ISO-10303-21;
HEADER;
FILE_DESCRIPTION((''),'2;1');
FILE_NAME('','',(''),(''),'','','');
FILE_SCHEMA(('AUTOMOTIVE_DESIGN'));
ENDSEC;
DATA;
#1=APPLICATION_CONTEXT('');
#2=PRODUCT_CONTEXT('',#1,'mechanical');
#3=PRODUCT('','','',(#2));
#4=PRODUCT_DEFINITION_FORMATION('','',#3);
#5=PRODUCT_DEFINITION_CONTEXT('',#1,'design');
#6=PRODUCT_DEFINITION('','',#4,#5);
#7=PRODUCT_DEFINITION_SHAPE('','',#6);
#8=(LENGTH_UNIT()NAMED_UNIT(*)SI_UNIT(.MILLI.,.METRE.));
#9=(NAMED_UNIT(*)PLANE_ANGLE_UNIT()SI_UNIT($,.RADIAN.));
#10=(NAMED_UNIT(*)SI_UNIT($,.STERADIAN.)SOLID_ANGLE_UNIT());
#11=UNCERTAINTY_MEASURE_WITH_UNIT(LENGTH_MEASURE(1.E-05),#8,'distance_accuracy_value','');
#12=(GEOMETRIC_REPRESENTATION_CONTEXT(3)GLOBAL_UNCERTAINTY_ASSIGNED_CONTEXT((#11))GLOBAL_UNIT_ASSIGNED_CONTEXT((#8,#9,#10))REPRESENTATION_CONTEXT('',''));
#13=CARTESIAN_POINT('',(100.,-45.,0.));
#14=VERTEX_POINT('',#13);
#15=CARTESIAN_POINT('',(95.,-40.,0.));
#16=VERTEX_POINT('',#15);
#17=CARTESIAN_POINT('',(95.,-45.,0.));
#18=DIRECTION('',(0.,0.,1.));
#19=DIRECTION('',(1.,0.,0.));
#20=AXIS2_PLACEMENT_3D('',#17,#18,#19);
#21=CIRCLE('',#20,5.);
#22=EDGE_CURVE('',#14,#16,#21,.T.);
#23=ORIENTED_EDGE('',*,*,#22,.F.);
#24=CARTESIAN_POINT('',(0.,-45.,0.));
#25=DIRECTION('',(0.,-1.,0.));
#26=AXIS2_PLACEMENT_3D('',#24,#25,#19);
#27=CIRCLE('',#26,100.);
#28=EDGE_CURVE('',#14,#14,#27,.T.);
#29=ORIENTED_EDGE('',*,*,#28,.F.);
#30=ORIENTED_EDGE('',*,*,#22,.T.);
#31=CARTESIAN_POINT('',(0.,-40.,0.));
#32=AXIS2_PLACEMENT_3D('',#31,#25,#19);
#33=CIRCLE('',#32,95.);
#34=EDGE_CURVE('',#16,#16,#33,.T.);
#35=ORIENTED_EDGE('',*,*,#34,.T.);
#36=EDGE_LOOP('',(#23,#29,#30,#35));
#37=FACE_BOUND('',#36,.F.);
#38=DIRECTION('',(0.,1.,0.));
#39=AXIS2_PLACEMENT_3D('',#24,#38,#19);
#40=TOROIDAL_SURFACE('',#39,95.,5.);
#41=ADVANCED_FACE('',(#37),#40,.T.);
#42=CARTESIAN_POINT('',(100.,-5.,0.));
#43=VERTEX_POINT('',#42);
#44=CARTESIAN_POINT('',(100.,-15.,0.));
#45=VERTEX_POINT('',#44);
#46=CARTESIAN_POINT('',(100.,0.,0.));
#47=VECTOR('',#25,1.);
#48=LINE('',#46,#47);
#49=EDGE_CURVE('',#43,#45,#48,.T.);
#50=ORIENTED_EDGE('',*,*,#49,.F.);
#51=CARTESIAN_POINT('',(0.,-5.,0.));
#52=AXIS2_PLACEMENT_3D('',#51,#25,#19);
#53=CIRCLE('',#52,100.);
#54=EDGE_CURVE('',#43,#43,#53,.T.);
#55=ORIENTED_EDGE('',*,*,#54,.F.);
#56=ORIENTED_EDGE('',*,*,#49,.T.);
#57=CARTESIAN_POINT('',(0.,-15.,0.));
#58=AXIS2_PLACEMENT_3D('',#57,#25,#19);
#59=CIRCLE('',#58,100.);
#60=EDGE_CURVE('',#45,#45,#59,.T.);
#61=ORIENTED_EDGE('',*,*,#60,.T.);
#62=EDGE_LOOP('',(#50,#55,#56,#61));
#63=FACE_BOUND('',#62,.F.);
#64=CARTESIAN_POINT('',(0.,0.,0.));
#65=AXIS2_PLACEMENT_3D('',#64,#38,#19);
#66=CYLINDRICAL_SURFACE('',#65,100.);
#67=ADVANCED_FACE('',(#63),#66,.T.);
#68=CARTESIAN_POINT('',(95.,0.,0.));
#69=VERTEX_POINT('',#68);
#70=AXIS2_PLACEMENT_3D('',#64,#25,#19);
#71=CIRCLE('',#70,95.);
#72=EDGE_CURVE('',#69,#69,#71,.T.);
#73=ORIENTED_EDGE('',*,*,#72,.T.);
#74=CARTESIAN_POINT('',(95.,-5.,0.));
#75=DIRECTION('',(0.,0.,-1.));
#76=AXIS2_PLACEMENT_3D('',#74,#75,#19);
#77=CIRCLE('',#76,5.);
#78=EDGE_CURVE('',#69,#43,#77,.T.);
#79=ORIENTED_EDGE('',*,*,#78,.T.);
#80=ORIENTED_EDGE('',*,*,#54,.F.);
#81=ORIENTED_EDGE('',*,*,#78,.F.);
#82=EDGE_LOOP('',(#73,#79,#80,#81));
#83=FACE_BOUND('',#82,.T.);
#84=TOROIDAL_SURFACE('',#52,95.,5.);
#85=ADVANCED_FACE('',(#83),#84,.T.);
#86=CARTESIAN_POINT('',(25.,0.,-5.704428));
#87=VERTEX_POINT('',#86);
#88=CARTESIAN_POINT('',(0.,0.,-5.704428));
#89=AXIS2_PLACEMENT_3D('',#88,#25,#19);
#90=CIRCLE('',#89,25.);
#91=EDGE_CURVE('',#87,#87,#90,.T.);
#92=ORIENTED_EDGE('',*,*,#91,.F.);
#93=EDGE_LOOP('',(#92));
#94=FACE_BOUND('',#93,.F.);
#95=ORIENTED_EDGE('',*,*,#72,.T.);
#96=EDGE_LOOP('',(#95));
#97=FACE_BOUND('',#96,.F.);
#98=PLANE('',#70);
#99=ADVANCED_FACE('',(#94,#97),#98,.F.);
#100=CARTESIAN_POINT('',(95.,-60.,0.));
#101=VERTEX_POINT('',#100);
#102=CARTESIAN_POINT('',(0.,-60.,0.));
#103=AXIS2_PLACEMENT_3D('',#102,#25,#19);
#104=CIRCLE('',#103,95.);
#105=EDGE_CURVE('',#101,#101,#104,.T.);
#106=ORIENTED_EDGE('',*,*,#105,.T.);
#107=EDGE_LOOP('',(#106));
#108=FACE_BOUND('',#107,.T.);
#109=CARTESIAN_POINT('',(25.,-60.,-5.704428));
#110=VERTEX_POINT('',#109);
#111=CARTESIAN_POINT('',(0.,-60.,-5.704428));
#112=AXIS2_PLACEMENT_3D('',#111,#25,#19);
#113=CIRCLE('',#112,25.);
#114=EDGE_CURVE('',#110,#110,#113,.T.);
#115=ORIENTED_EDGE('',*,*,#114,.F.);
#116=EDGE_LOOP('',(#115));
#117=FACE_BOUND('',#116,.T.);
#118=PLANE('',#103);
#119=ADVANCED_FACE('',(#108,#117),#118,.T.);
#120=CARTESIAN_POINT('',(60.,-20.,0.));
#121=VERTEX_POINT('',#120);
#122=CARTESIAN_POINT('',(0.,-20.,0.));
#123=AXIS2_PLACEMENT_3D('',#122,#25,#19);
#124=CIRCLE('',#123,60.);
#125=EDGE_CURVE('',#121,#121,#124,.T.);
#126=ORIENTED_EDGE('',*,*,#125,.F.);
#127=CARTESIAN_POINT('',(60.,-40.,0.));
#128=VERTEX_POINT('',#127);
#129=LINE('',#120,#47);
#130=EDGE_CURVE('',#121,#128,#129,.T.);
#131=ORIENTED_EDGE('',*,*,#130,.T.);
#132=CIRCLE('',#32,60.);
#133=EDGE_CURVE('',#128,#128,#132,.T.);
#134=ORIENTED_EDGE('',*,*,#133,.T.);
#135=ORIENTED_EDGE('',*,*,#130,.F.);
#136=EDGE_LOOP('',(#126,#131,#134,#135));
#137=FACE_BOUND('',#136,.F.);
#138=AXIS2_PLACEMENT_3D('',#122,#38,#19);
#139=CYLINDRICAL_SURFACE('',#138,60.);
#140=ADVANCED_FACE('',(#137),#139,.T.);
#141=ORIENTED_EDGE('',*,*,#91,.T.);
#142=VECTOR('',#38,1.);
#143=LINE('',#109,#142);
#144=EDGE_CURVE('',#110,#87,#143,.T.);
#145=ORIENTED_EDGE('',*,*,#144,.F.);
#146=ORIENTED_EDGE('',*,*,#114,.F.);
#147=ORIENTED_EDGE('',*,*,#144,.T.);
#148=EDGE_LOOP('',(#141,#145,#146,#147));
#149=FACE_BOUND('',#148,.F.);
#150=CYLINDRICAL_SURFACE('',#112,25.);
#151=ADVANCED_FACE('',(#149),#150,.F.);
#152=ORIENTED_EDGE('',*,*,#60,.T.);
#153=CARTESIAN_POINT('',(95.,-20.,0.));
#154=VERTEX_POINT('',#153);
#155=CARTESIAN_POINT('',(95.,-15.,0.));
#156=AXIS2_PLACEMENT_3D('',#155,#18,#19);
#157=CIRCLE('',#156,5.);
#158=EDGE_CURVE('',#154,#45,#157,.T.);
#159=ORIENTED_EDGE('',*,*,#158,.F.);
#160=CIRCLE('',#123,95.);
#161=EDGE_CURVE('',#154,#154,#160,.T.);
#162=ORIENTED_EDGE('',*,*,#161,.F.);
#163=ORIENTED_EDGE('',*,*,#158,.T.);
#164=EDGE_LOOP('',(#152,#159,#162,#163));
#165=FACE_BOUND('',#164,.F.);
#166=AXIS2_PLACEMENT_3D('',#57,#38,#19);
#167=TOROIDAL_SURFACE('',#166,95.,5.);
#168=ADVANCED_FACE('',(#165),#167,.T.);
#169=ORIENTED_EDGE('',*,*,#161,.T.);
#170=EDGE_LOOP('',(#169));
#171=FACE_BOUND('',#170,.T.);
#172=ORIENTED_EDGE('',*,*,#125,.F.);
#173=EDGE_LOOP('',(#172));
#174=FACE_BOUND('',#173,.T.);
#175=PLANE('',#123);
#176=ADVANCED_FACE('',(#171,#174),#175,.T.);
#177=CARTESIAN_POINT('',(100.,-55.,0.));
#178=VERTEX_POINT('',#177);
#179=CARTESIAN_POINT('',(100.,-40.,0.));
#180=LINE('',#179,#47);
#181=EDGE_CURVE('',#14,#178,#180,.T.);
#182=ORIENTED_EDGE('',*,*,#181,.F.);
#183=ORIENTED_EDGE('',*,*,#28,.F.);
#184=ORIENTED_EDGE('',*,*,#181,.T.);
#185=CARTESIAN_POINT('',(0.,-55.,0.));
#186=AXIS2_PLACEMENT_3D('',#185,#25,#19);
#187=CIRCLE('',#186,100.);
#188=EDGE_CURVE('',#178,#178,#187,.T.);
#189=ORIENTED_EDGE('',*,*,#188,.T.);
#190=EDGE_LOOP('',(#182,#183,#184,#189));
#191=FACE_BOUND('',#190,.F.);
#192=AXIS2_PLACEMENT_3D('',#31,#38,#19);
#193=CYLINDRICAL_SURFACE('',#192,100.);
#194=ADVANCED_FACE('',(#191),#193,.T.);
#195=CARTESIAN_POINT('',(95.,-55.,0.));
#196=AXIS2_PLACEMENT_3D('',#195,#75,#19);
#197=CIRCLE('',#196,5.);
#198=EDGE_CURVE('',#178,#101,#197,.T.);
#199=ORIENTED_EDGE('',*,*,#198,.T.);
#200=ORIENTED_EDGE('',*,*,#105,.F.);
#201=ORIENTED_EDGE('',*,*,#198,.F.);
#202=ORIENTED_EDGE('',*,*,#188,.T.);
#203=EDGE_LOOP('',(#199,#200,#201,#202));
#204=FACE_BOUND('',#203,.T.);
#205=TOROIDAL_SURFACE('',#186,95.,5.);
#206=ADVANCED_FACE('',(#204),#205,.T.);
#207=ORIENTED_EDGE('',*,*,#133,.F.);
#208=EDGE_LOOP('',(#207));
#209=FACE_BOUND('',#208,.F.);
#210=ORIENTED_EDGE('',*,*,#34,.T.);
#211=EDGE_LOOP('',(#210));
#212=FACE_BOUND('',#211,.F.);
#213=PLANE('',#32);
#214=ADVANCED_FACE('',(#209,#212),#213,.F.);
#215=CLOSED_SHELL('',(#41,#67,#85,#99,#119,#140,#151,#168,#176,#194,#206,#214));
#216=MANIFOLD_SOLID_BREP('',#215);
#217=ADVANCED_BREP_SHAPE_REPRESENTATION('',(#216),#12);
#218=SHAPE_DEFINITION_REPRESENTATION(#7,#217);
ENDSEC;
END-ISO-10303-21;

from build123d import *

# Parameters (mm, degrees)
F0_R     = 100
F1_DEPTH = 20
F2_R     = 60
F3_DEPTH = 20
F4_R     = 100
F5_DEPTH = 20
F6_R     = 25
F7_DEPTH = 100
F8_R     = 5


with BuildPart() as f1:
    # F0 (on Front) → F1 (new body)
    with BuildSketch(Plane.XZ):
        Circle(F0_R)
    extrude(amount=F1_DEPTH)

    # F2 (on face) → F3 (join)
    with BuildSketch(Plane.XZ.offset(20)):
        Circle(F2_R)
    extrude(amount=F3_DEPTH)

    # F4 (on face) → F5 (join)
    with BuildSketch(Plane.XZ.offset(40)):
        Circle(F4_R)
    extrude(amount=F5_DEPTH)

    # F6 (on face) → F7 (cut)
    with BuildSketch(Plane.XZ.offset(60)):
        with Locations((0, -5.704428)):
            Circle(F6_R)
    extrude(amount=-F7_DEPTH, mode=Mode.SUBTRACT)

    # F8
    f8_edges = [f1.edges().sort_by_distance(p)[0] for p in [
        (-100, -60, 0),
        (-100, -40, 0),
        (-100, -20, 0),
        (-100, 0, 0),
    ]]
    fillet(f8_edges, radius=F8_R)


solid = f1.part
